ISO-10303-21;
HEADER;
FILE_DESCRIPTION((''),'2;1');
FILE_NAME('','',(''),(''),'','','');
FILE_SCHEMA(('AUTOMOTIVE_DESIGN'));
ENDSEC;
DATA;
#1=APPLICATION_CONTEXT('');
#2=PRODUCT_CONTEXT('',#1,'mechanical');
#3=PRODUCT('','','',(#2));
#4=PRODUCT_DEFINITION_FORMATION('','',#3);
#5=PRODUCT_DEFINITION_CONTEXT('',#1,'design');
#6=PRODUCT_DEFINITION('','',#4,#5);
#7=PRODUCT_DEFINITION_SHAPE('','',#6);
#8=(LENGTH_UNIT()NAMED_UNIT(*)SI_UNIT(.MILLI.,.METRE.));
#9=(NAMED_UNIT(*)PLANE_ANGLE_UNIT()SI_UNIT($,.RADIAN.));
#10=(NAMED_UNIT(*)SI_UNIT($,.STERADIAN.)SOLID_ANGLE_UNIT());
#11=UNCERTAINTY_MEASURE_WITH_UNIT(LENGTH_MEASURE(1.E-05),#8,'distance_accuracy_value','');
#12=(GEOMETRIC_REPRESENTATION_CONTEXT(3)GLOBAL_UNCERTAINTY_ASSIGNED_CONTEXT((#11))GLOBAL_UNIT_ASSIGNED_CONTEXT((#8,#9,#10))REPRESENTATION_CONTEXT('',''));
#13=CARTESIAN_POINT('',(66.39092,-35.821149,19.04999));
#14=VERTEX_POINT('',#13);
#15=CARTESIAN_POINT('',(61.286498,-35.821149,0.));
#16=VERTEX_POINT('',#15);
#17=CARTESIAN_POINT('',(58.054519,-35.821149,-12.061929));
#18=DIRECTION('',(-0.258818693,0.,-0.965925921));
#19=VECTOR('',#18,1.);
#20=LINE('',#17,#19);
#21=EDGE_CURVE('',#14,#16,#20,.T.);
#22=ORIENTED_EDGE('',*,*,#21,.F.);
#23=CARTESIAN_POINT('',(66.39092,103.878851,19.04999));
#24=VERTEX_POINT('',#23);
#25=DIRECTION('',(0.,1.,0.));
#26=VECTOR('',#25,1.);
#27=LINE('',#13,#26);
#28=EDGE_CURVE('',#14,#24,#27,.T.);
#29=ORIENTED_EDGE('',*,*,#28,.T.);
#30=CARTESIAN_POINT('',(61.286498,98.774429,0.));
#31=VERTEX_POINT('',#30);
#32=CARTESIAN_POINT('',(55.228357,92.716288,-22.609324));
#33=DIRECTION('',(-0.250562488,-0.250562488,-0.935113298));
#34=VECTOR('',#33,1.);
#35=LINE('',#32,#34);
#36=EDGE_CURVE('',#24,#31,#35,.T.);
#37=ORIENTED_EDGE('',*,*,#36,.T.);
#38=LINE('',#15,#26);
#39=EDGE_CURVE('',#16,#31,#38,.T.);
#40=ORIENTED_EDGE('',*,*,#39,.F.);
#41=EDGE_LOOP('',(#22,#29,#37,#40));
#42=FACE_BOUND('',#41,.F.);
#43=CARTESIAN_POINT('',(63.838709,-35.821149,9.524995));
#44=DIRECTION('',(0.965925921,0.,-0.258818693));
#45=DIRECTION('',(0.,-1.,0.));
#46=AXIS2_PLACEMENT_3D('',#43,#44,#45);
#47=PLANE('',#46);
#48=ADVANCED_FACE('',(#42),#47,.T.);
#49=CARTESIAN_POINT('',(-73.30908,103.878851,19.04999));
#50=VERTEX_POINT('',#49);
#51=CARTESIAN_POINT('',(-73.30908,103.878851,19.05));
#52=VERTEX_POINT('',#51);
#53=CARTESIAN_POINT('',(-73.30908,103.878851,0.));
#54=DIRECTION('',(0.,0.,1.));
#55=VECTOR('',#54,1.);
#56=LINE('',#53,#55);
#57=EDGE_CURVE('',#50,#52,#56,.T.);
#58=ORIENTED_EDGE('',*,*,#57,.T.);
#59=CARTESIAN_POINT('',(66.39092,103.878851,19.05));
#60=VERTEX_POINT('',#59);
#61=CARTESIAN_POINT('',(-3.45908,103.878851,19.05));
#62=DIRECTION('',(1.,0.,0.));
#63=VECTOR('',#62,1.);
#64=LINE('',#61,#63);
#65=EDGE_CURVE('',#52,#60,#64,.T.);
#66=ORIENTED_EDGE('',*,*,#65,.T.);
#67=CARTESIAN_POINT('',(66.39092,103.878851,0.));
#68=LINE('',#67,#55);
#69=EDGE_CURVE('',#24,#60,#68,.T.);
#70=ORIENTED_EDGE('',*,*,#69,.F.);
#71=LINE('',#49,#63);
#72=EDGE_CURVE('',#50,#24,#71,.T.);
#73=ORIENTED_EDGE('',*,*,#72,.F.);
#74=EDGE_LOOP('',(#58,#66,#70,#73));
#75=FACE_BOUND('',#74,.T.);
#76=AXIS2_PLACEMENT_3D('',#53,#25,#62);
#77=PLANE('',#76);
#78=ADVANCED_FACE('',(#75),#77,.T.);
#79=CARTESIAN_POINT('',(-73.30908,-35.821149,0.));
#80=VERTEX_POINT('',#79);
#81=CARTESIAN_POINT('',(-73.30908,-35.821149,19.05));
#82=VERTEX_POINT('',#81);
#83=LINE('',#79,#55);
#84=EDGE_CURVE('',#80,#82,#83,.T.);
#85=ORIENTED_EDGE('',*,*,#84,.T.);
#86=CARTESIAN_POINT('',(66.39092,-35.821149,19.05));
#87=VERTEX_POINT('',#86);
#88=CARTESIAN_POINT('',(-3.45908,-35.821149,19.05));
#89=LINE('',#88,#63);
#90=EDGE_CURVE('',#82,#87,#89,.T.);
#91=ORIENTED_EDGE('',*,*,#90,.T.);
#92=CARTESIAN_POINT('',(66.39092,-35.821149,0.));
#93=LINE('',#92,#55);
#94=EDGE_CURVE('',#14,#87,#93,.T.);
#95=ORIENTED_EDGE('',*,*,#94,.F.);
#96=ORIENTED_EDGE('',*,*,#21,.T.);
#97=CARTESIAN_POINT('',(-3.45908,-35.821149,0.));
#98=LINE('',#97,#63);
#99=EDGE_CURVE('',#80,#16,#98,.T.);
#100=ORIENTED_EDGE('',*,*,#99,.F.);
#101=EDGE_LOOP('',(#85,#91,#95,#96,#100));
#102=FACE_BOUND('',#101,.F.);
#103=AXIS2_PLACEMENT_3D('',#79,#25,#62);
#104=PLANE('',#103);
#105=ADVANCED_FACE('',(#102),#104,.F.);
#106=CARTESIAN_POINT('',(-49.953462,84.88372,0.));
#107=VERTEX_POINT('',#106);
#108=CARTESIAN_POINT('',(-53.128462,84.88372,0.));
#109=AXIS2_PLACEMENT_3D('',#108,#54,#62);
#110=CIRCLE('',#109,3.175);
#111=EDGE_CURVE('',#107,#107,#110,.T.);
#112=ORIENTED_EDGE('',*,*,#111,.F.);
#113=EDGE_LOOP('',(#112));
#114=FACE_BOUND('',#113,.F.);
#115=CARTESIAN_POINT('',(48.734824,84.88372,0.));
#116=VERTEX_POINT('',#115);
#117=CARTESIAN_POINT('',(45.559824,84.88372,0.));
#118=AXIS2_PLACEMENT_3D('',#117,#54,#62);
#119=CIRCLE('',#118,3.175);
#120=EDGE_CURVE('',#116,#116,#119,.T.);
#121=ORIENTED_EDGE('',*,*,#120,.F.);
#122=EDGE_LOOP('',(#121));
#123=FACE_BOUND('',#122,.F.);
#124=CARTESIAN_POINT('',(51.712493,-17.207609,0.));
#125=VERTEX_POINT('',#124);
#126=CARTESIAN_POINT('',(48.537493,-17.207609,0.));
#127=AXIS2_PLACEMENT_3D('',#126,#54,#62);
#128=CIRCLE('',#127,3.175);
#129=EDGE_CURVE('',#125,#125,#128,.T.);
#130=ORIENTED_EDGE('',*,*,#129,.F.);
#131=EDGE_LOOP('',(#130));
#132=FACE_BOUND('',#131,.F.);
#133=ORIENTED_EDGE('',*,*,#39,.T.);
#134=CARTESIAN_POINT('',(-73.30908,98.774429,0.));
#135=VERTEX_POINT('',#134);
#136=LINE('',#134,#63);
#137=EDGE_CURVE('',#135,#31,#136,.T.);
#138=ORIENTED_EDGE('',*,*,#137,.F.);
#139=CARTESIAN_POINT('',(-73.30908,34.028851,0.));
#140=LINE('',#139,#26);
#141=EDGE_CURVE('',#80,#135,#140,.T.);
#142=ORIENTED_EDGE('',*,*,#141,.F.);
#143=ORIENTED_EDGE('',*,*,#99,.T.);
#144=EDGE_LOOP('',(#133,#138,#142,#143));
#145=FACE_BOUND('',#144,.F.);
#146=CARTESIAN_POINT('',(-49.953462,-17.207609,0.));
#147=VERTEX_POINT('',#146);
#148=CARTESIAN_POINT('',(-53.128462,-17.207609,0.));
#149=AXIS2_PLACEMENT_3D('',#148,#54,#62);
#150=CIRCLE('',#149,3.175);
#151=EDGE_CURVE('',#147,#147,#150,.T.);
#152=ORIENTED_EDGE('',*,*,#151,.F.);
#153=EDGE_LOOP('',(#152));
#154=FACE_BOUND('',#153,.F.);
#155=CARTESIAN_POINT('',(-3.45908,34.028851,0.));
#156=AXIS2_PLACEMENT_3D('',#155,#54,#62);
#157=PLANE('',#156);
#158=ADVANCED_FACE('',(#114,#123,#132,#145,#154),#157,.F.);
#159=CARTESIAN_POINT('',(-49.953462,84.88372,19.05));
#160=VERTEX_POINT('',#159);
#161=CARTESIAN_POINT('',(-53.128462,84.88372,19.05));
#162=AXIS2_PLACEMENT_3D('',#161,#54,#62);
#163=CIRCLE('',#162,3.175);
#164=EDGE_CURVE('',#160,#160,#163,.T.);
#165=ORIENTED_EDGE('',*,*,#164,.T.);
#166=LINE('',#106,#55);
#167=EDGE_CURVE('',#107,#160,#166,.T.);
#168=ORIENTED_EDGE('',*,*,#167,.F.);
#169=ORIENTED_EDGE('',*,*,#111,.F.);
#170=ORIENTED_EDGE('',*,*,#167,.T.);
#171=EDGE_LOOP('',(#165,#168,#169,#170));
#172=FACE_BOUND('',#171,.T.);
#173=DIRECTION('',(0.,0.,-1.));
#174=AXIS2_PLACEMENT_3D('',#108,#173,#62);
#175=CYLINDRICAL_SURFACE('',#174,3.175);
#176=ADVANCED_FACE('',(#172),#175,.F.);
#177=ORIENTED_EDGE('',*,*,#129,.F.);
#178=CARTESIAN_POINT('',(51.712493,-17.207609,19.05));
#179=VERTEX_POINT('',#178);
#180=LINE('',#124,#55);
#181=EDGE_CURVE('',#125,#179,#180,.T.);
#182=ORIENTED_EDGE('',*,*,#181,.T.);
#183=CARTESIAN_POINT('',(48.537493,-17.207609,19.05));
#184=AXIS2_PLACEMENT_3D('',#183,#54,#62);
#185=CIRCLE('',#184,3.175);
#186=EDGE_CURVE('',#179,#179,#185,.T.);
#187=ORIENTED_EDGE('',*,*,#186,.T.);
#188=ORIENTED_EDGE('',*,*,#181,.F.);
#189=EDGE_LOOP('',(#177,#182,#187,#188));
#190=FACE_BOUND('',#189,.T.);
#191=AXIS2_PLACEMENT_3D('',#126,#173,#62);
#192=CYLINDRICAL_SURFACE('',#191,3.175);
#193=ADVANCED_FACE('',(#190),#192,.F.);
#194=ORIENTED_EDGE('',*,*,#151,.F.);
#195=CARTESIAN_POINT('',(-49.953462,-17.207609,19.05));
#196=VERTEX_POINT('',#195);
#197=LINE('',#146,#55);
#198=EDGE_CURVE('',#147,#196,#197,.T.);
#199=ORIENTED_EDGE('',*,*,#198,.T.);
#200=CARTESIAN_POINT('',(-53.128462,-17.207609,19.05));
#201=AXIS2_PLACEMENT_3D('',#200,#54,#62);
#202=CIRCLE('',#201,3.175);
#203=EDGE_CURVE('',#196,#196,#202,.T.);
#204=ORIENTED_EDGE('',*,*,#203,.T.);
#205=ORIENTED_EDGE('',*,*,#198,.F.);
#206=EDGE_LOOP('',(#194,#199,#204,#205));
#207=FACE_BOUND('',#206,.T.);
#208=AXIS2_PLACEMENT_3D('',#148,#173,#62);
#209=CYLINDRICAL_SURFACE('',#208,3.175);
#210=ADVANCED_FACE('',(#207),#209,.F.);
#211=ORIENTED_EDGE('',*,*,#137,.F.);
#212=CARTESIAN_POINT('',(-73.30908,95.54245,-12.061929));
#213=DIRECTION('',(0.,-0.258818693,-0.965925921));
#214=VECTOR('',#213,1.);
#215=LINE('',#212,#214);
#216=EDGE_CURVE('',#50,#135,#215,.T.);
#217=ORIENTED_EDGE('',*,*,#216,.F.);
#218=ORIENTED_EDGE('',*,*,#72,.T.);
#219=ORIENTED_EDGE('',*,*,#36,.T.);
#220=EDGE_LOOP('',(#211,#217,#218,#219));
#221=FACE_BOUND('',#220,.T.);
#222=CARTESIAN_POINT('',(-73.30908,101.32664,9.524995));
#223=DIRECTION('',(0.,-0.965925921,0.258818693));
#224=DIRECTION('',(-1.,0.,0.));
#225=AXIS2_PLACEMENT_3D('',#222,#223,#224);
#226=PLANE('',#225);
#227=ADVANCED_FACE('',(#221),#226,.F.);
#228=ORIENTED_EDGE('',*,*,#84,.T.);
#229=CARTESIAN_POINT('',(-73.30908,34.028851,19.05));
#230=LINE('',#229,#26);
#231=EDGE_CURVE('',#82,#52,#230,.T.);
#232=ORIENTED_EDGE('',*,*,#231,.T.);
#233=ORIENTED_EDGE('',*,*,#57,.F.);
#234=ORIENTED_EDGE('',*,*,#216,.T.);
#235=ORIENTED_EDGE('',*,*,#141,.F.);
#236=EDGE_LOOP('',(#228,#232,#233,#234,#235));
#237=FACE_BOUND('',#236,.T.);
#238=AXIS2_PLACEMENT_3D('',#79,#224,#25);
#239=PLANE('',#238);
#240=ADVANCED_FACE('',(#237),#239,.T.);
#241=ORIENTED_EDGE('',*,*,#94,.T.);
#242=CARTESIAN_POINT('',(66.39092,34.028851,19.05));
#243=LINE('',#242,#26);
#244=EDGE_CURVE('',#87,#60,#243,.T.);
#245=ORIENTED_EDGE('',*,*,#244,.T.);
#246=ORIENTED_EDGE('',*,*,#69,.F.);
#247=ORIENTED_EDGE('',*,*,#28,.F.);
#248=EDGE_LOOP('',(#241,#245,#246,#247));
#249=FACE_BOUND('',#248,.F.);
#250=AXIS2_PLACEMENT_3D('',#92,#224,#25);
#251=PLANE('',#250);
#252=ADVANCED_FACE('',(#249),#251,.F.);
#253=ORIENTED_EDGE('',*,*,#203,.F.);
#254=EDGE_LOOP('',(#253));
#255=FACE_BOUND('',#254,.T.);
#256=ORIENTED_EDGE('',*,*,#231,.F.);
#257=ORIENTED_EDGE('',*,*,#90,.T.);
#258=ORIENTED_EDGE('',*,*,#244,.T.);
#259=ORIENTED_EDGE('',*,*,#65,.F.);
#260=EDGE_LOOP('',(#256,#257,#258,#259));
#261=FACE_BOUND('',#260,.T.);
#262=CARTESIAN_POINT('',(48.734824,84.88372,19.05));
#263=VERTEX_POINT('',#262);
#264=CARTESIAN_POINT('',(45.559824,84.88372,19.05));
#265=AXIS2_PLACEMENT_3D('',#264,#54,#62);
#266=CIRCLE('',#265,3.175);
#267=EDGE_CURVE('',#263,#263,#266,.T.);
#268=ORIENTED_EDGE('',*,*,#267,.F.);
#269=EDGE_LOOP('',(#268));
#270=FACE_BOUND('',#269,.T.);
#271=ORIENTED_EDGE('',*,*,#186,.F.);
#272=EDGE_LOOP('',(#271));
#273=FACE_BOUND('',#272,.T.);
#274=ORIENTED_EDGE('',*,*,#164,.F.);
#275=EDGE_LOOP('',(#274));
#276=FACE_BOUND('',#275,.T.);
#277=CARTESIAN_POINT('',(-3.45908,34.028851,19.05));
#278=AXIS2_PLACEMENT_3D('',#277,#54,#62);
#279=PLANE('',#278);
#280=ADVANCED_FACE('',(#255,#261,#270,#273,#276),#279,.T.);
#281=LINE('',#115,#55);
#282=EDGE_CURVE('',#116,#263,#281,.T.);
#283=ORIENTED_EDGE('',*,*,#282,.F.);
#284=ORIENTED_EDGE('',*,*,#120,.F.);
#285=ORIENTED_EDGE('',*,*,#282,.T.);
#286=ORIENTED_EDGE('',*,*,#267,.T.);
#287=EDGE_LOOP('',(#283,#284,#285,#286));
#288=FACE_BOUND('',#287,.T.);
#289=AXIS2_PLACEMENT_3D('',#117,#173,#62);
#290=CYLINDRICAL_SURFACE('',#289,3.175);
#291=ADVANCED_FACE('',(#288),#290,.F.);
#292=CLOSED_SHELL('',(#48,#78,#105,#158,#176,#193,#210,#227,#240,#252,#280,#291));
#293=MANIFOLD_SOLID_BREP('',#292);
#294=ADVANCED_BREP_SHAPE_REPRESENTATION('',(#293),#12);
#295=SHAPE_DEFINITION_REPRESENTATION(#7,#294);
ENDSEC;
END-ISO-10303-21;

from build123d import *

# Parameters (mm, degrees)
F0_W     = 139.7
F0_H     = 139.7
F0_R     = 3.175
F1_DEPTH = 19.05
F2_SIZE2 = 5.104422
F2_SIZE  = 19.04999


# Not quite as in the source:
# - a fillet or chamfer is up to 0.001 mm smaller than in the source, because OpenCascade refuses the exact size


with BuildPart() as f1:
    # F0 (on Top) → F1 (new body)
    with BuildSketch(Plane.XY):
        with Locations((-3.4590801224, 34.0288509236)):
            Rectangle(F0_W, F0_H)
        with Locations((-53.1284622848, -17.2076094896)):
            Circle(F0_R, mode=Mode.SUBTRACT)
        with Locations((48.5374927521, -17.2076094896)):
            Circle(F0_R, mode=Mode.SUBTRACT)
        with Locations((-53.1284622848, 84.8837196827)):
            Circle(F0_R, mode=Mode.SUBTRACT)
        with Locations((45.559823513, 84.8837196827)):
            Circle(F0_R, mode=Mode.SUBTRACT)
    extrude(amount=F1_DEPTH)

    # F2 (size 19.05 and 5.1044321158 in the source; OpenCascade refuses exactly that, so slightly less here)
    f2_edges = [f1.edges().sort_by_distance(p)[0] for p in [
        (66.39092, 34.028851, 0),
        (-3.45908, 103.878851, 0),
    ]]
    chamfer(f2_edges, length=F2_SIZE, length2=F2_SIZE2)


solid = f1.part
